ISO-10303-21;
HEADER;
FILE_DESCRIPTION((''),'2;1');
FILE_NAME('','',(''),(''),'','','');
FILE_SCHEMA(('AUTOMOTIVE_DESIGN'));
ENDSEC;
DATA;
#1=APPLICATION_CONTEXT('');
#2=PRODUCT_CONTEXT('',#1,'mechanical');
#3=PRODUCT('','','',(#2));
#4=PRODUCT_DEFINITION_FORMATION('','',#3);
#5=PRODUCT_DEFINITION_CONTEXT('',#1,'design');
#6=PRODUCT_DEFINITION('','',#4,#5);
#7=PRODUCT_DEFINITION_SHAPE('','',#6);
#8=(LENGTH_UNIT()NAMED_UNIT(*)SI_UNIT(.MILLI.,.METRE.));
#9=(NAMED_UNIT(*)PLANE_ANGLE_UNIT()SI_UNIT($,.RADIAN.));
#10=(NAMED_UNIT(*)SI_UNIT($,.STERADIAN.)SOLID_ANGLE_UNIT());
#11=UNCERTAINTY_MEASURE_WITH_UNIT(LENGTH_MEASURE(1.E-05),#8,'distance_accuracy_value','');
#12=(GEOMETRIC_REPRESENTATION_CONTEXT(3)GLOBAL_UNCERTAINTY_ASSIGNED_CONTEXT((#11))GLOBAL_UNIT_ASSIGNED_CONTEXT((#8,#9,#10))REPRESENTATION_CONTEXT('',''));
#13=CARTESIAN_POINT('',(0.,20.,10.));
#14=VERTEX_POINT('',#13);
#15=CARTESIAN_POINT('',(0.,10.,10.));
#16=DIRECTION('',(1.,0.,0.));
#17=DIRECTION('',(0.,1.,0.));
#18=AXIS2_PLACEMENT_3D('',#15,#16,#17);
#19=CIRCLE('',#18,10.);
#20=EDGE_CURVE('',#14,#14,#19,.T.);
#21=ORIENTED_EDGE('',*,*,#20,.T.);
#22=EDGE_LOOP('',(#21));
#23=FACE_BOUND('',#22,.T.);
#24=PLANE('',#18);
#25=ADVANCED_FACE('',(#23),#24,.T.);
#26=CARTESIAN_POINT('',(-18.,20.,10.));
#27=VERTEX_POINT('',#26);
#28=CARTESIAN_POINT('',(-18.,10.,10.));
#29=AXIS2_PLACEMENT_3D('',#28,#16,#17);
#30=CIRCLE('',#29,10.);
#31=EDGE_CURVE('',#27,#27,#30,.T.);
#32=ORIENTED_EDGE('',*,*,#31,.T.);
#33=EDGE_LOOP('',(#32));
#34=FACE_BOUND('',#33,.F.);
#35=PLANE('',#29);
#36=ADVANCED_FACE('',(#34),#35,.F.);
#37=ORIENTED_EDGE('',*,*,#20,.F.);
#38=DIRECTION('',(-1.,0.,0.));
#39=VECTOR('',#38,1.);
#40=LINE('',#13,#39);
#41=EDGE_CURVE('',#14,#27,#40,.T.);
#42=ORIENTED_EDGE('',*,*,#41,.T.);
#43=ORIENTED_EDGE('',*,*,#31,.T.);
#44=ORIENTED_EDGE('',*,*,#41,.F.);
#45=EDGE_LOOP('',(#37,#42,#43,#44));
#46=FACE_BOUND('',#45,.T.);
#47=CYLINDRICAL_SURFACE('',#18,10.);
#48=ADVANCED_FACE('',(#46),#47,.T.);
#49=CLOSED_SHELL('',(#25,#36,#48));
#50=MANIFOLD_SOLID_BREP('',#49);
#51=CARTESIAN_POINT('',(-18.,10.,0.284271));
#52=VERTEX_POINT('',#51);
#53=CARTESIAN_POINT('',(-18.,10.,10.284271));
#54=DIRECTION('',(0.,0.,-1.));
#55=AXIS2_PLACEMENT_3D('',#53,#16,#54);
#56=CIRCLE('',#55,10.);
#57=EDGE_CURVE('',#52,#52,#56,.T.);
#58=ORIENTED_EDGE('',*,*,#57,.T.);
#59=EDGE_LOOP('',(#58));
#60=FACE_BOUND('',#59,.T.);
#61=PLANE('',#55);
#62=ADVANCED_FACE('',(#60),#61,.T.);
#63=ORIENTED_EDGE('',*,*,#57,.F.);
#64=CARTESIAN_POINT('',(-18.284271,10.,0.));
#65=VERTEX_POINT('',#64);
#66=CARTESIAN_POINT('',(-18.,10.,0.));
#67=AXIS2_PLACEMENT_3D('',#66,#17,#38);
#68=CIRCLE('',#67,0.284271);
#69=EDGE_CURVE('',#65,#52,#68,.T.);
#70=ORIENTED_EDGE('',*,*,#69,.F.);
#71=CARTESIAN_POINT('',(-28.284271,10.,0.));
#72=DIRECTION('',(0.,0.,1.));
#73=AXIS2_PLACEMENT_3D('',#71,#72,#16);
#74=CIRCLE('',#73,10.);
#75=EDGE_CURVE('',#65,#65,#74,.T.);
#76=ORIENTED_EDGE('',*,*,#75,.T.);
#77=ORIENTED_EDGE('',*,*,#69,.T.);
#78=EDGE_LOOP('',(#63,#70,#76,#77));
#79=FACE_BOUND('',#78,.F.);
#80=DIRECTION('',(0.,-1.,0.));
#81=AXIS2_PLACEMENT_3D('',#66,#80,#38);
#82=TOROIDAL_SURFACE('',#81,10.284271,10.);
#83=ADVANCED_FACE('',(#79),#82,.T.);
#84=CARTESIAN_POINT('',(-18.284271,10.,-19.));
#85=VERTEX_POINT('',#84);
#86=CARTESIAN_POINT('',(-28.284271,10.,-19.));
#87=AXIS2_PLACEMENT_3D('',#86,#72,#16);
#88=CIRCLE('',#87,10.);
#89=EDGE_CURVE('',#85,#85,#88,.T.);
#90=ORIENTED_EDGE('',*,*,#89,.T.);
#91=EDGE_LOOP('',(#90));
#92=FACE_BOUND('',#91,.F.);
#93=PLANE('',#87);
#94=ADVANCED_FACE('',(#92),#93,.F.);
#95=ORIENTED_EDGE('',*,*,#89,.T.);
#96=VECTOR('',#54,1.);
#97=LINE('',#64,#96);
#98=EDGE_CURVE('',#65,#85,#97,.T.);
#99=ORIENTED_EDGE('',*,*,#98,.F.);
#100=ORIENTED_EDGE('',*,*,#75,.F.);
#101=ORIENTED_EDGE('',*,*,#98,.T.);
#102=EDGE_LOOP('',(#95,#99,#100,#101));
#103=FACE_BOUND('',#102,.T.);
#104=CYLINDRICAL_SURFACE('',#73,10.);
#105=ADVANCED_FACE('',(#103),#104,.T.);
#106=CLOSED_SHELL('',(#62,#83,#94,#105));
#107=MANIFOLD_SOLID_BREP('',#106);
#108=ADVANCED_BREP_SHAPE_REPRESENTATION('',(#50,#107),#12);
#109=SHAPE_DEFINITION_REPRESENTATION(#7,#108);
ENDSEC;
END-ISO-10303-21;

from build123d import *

# Parameters (mm, degrees)
F1_R      = 10
F2_DEPTH  = 18
F0_R      = 10
F3_DEPTH  = 19
F3_FACE_R = 10
F5_ANGLE  = 90


with BuildPart() as f2:
    # F1 (on Right) → F2 (new body)
    with BuildSketch(Plane.YZ):
        with Locations((10, 10)):
            Circle(F1_R)
    extrude(amount=-F2_DEPTH)


with BuildPart() as f3:
    # F0 (on Top) → F3 (new body)
    with BuildSketch(Plane.XY):
        with Locations((-28.2842712475, 10)):
            Circle(F0_R)
    extrude(amount=-F3_DEPTH)

    # F3_face (on face) → F5 (revolve)
    with BuildSketch(Plane(origin=(-28.2842712475, 10, 0), x_dir=(1, 0, 0), z_dir=(0, 0, 1))):
        Circle(F3_FACE_R)
    revolve(axis=Axis((-18, 7.3859319091, 0), (0, 1, 0)), revolution_arc=F5_ANGLE)


solid = Compound([f2.part, f3.part])
